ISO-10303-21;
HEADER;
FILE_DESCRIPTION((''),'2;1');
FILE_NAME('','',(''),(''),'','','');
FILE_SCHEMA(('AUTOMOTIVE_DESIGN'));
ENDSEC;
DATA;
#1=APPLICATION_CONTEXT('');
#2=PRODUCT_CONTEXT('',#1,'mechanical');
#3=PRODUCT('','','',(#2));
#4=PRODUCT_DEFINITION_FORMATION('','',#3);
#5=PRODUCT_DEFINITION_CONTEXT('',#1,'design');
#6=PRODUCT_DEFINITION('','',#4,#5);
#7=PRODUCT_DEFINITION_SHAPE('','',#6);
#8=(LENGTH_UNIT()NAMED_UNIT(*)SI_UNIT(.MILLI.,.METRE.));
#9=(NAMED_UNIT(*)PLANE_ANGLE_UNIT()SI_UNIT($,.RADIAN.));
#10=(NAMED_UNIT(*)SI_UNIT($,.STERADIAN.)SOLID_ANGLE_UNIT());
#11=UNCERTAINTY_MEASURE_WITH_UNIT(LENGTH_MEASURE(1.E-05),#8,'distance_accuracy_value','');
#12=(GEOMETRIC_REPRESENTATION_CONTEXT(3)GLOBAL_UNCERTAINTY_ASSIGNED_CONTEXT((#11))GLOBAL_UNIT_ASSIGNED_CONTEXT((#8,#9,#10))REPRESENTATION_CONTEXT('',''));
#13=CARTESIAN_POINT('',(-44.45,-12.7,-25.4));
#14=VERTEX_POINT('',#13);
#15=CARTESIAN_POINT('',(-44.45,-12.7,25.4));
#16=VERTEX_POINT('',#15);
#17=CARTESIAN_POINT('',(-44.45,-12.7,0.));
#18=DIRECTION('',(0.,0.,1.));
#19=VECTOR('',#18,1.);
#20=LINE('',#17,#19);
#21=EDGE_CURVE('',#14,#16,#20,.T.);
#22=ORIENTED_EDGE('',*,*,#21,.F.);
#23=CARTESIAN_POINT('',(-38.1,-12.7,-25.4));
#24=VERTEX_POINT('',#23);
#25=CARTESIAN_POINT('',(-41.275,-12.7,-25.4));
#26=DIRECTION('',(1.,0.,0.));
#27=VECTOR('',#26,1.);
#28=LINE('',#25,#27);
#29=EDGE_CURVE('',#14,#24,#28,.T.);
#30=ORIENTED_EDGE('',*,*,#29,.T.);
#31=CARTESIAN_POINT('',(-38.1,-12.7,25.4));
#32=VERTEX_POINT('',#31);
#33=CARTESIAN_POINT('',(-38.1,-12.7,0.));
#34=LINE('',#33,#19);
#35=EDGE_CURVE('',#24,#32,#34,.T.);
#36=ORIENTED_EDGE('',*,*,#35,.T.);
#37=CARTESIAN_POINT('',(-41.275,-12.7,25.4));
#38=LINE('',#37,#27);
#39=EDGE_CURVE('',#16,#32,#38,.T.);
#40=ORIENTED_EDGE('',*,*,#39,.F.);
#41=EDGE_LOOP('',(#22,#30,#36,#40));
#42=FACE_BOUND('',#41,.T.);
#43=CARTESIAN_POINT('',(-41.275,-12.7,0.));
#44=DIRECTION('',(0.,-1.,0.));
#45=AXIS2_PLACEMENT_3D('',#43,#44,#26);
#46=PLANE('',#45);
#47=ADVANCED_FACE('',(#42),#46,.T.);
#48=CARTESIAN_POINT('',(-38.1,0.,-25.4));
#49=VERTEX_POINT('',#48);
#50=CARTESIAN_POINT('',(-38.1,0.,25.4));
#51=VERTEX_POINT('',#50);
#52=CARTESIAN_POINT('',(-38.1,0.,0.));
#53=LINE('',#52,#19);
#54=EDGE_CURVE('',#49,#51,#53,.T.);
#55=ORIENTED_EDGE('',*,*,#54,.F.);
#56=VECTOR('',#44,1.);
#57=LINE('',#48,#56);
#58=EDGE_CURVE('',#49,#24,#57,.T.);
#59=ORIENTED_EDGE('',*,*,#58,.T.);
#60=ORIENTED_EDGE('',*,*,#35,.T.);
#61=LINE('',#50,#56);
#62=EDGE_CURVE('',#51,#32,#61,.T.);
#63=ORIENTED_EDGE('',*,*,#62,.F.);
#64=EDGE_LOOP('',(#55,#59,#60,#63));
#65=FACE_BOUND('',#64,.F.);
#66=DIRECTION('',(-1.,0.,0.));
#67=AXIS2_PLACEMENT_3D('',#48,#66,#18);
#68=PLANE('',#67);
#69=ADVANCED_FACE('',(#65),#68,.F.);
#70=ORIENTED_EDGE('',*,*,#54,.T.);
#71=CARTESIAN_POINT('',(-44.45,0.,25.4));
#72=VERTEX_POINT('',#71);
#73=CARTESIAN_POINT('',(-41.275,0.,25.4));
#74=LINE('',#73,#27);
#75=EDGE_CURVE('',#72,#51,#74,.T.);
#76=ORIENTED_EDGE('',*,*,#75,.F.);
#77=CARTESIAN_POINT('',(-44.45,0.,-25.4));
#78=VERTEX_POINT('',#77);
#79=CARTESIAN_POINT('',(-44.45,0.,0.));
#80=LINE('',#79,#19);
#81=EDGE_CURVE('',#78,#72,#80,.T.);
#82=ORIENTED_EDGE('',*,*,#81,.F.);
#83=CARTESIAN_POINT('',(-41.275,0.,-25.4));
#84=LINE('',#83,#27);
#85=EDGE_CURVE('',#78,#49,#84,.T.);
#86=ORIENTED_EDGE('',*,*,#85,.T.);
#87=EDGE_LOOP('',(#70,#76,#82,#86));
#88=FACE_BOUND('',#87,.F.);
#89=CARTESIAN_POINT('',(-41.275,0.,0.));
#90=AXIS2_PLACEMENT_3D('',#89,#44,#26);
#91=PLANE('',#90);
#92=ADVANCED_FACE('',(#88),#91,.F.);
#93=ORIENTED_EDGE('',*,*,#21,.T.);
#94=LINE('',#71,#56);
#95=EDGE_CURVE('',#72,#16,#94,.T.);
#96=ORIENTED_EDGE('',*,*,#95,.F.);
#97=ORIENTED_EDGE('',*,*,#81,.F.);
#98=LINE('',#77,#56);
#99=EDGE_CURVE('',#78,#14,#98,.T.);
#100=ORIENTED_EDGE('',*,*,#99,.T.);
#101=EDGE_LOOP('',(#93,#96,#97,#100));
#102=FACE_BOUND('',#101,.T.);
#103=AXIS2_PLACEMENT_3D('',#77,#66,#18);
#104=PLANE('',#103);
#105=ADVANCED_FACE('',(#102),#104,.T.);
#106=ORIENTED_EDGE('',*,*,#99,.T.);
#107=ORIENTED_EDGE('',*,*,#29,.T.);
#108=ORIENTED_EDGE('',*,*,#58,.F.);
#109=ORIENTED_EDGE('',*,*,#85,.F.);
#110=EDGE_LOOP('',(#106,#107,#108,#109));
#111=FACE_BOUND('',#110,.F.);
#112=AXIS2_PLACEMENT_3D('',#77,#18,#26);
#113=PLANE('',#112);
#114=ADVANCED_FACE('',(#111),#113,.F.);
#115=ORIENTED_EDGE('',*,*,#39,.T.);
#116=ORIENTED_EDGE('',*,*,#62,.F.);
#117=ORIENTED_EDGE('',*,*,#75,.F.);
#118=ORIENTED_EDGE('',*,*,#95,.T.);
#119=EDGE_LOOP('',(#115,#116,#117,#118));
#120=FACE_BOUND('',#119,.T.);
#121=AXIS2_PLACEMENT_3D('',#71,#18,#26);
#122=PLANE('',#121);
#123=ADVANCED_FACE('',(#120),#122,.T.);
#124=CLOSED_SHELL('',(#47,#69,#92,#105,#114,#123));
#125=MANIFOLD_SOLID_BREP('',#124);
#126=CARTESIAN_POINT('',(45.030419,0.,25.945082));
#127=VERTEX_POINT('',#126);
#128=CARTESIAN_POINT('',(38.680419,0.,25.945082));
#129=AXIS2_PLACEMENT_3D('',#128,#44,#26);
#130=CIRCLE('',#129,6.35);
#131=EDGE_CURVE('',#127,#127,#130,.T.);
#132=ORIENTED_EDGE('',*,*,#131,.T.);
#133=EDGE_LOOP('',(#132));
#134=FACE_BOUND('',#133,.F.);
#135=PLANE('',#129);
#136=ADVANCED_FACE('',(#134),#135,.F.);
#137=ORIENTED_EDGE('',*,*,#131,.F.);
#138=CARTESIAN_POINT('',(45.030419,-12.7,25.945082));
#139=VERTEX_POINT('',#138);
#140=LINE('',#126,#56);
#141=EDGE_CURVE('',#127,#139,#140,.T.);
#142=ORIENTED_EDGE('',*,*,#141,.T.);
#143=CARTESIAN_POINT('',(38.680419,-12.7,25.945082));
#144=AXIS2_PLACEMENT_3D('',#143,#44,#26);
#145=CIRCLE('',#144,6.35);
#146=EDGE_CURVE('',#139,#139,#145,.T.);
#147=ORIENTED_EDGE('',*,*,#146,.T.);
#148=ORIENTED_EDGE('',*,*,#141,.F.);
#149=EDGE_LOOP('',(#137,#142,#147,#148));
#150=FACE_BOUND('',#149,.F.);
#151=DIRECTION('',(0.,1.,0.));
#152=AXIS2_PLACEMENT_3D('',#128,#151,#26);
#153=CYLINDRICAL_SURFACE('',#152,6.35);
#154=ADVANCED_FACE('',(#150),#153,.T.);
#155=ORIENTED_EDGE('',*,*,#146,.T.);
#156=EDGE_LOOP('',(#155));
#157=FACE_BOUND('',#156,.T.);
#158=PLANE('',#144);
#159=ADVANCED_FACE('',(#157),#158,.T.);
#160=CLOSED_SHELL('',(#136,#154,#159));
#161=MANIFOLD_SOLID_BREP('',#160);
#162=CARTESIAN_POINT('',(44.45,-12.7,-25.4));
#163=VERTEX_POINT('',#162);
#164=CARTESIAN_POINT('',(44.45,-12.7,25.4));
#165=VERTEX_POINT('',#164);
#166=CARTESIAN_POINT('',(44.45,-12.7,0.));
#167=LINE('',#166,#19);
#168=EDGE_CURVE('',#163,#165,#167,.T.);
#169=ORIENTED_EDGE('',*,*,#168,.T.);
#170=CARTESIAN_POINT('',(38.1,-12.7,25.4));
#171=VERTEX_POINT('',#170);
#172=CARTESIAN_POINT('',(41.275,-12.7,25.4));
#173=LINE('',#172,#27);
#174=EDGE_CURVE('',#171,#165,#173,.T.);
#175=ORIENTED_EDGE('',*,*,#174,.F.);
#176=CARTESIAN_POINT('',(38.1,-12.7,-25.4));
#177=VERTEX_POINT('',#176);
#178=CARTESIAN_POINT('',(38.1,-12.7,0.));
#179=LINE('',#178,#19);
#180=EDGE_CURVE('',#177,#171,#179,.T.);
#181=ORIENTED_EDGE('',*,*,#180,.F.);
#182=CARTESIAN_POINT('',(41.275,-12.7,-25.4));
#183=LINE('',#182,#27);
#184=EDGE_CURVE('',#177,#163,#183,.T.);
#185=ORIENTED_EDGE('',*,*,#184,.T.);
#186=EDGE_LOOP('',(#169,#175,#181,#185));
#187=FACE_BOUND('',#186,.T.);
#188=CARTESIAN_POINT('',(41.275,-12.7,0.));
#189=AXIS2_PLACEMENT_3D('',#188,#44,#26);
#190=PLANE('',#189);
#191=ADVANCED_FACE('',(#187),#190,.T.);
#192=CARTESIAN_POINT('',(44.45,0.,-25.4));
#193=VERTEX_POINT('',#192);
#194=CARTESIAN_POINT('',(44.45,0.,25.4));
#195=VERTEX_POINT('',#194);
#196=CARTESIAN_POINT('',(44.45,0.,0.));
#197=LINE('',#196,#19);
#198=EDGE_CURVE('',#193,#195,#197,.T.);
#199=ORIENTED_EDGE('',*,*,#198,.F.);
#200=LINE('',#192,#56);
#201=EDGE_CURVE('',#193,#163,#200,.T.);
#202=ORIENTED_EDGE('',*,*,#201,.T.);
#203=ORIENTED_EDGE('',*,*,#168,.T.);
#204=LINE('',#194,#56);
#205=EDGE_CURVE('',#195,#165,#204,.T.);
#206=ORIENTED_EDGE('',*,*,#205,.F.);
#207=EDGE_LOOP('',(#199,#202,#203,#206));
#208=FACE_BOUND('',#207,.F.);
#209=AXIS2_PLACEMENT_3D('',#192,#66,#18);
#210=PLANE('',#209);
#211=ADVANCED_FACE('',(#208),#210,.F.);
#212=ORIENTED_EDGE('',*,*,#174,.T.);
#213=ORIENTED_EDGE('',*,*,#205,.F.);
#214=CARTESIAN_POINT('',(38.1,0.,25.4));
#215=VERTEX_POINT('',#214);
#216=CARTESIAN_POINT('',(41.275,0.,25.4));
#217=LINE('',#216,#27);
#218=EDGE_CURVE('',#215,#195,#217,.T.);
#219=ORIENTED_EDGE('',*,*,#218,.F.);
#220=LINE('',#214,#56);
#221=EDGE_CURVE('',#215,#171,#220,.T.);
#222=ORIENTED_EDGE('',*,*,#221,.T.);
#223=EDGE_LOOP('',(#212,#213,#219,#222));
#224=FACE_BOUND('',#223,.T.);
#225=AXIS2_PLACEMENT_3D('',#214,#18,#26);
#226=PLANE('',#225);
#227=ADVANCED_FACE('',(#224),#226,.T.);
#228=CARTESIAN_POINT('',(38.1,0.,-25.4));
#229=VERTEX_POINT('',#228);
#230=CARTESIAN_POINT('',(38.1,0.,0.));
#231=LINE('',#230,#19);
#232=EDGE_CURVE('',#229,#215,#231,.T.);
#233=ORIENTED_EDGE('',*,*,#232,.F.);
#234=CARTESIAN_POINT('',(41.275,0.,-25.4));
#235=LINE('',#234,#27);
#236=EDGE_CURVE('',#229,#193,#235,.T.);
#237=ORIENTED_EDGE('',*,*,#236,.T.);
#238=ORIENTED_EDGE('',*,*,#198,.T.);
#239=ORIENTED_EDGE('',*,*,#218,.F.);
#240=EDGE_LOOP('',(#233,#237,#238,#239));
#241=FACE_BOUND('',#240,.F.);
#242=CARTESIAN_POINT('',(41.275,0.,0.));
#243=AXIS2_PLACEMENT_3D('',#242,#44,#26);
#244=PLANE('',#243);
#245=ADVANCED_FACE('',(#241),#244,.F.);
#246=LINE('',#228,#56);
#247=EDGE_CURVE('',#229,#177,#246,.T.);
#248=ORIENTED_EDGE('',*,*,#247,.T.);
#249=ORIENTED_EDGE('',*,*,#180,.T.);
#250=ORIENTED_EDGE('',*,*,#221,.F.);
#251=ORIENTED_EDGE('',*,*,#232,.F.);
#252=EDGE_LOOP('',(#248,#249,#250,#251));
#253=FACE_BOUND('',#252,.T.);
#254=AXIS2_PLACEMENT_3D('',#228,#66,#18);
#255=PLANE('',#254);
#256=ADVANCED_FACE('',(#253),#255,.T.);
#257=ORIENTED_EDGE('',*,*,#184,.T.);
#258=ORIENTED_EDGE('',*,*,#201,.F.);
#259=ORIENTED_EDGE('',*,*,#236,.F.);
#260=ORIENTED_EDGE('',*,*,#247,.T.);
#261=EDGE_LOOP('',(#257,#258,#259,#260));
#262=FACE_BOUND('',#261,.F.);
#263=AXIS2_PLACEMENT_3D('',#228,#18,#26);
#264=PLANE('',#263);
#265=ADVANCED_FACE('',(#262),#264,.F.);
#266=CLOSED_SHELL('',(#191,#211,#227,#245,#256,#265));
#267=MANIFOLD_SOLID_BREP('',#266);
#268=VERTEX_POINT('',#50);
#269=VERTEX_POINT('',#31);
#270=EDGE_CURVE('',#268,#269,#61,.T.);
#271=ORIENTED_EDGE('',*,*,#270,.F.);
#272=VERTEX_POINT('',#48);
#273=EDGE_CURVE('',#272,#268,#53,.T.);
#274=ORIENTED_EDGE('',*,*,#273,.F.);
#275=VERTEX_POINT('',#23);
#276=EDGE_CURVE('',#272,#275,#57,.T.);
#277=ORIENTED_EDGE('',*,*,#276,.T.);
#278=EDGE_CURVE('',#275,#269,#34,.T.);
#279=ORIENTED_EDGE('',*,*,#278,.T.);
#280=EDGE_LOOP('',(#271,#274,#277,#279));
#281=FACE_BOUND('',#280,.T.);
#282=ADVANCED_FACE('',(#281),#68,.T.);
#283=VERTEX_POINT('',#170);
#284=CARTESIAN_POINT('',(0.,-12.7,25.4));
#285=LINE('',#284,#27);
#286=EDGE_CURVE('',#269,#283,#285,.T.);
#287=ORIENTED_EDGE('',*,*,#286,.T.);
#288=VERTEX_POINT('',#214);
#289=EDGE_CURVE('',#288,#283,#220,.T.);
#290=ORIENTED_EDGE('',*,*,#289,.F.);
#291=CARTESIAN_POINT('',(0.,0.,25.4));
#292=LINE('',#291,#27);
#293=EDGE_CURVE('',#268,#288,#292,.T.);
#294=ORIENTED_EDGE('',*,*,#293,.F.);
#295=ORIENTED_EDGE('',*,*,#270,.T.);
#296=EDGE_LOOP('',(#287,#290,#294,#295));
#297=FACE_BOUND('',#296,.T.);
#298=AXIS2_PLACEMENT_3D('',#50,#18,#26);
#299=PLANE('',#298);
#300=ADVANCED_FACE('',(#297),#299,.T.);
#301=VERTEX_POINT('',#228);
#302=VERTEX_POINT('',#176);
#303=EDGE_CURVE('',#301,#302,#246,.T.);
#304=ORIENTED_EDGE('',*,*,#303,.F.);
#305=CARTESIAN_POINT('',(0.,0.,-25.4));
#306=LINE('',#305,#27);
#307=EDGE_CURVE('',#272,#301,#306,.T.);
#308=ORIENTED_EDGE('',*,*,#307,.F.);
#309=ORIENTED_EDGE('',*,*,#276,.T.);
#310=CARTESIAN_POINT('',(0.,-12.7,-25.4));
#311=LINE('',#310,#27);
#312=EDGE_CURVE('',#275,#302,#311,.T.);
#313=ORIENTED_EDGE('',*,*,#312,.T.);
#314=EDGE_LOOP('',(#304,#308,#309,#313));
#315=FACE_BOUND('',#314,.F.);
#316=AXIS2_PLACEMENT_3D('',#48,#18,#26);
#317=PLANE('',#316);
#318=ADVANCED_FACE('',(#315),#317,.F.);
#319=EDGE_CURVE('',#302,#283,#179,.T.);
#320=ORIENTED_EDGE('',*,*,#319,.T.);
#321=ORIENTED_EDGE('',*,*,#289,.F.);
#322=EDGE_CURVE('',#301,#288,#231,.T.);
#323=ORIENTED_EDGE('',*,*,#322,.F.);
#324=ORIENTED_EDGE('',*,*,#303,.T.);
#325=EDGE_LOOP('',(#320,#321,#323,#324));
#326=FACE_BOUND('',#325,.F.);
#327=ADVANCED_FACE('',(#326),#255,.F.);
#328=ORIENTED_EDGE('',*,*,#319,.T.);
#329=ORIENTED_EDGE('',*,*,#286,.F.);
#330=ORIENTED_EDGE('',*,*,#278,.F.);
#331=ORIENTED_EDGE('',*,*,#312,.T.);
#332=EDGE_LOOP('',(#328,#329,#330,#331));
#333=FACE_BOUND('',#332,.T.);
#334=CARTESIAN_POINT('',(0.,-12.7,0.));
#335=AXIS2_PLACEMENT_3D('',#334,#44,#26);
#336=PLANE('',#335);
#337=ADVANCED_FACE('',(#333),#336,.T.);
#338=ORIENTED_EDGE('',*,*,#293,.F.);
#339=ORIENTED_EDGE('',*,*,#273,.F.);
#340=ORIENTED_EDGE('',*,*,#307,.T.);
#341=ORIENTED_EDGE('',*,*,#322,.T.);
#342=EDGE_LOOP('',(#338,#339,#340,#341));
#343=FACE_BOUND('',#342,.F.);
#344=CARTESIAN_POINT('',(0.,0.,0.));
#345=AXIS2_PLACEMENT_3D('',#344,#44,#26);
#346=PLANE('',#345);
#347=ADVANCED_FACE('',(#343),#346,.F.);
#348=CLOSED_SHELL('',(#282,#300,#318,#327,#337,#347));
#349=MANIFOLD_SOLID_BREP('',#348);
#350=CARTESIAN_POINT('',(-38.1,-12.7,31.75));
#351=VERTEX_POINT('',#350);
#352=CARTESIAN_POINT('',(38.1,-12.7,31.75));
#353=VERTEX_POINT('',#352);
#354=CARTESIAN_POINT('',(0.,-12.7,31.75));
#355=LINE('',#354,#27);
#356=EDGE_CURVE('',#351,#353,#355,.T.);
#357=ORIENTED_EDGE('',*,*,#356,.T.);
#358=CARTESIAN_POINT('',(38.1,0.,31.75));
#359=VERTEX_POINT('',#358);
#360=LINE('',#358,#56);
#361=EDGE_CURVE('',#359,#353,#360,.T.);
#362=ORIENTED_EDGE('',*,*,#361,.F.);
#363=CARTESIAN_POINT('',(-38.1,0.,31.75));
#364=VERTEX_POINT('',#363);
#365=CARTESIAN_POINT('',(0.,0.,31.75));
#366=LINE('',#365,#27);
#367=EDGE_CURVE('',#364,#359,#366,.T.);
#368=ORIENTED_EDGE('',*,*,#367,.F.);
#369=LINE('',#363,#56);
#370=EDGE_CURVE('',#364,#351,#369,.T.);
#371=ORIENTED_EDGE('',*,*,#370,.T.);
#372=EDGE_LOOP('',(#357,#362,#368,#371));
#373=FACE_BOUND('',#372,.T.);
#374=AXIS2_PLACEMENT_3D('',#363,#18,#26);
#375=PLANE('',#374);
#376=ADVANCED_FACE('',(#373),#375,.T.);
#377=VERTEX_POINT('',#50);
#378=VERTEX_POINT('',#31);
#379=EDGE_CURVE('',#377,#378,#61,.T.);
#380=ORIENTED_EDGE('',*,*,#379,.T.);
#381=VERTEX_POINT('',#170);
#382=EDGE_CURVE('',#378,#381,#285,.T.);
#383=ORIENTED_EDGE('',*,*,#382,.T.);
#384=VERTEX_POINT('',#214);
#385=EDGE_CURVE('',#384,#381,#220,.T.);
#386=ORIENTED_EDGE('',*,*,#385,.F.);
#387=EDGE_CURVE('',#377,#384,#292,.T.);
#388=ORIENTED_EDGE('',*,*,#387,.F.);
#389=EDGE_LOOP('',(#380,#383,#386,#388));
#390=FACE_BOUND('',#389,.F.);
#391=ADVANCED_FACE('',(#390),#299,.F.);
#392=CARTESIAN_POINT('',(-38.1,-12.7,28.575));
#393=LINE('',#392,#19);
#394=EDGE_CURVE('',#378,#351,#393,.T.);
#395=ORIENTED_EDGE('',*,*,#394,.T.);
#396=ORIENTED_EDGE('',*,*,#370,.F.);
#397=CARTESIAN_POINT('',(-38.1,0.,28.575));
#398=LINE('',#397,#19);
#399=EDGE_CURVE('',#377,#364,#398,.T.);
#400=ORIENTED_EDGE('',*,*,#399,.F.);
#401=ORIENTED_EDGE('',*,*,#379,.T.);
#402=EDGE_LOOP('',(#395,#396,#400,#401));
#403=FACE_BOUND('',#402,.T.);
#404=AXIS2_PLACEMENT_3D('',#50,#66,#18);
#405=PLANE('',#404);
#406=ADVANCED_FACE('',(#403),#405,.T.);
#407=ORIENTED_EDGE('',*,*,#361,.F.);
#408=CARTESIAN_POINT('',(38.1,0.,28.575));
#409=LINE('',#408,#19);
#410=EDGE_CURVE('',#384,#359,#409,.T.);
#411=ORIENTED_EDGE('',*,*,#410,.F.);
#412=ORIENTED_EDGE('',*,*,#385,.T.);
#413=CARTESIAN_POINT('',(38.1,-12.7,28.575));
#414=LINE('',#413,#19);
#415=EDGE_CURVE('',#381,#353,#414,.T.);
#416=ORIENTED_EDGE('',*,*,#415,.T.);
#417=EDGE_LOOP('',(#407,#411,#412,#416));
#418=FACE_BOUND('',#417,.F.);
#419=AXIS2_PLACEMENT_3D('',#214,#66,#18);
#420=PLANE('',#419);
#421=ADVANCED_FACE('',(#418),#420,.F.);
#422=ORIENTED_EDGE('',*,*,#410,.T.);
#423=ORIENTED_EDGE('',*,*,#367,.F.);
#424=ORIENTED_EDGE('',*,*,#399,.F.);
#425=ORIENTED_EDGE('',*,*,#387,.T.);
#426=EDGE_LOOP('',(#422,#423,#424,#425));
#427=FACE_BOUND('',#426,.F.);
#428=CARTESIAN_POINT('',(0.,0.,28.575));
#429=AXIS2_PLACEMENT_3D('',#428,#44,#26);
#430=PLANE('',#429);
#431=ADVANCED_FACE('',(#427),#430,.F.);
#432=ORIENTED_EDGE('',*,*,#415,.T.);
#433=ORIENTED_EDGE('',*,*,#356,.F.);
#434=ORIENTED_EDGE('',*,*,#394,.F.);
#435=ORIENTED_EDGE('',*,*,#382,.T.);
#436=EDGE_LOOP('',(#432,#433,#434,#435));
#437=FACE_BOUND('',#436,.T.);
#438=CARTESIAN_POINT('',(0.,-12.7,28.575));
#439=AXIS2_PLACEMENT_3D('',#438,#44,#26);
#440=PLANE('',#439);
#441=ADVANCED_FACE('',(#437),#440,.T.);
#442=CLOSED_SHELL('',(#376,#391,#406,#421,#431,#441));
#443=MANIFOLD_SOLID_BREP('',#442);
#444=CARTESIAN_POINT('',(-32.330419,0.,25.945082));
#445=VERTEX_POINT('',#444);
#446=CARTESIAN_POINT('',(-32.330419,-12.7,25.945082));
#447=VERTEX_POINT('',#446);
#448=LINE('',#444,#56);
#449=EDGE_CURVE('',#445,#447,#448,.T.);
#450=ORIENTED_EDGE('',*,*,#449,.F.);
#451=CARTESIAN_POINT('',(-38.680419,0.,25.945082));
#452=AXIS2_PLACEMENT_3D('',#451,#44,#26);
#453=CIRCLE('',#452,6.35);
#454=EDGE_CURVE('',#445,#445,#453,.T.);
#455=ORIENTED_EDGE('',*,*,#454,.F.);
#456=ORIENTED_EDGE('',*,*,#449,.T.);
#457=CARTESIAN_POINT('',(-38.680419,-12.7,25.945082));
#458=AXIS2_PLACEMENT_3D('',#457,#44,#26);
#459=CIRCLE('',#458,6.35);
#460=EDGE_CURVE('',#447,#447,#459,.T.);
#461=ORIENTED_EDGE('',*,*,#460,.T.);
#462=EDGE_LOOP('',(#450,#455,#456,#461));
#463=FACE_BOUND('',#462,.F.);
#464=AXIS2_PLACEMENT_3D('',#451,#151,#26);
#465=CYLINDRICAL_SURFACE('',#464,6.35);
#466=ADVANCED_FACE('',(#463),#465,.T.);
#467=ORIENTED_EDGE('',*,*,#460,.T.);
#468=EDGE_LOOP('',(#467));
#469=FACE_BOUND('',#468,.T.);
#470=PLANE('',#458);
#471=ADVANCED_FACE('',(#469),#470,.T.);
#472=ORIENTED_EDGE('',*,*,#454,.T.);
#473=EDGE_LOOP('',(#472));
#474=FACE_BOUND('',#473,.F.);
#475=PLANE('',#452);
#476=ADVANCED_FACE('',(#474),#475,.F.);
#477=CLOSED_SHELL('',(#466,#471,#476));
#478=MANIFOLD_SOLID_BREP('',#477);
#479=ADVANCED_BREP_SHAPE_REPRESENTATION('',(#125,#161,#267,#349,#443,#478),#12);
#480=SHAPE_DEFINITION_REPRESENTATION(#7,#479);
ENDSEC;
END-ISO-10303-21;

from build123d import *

# Parameters (mm, degrees)
F0_W     = 76.2
F0_H     = 50.8
F3_DEPTH = 12.7
F1_R     = 6.35
F2_W     = 6.35
F2_H     = 50.8
F2_W_2   = 76.2
F2_H_2   = 6.35


# Not quite as in the source:
# - a feature of the source that left no trace in its solid (it failed there, or was rolled back) is left out


with BuildPart() as f3:
    # F0 (on Front) → F3 (new body)
    with BuildSketch(Plane.XZ):
        Rectangle(F0_W, F0_H)
    extrude(amount=F3_DEPTH)


with BuildPart() as f3b:
    # F1 (on Front) → F3, piece 2 (new body)
    with BuildSketch(Plane.XZ):
        with Locations((-38.6804193258, 25.9450823069)):
            Circle(F1_R)
    extrude(amount=F3_DEPTH)


with BuildPart() as f3c:
    # F1 (on Front) → F3, piece 3 (new body)
    with BuildSketch(Plane.XZ):
        with Locations((38.6804193258, 25.9450823069)):
            Circle(F1_R)
    extrude(amount=F3_DEPTH)


with BuildPart() as f3d:
    # F2 (on Front) → F3, piece 4 (new body)
    with BuildSketch(Plane.XZ):
        with Locations((41.275, 0)):
            Rectangle(F2_W, F2_H)
    extrude(amount=F3_DEPTH)


with BuildPart() as f3e:
    # F2 (on Front) → F3, piece 5 (new body)
    with BuildSketch(Plane.XZ):
        with Locations((0, 28.575)):
            Rectangle(F2_W_2, F2_H_2)
    extrude(amount=F3_DEPTH)


with BuildPart() as f3f:
    # F2 (on Front) → F3, piece 6 (new body)
    with BuildSketch(Plane.XZ):
        with Locations((-41.275, 0)):
            Rectangle(F2_W, F2_H)
    extrude(amount=F3_DEPTH)


solid = Compound([f3.part, f3b.part, f3c.part, f3d.part, f3e.part, f3f.part])
